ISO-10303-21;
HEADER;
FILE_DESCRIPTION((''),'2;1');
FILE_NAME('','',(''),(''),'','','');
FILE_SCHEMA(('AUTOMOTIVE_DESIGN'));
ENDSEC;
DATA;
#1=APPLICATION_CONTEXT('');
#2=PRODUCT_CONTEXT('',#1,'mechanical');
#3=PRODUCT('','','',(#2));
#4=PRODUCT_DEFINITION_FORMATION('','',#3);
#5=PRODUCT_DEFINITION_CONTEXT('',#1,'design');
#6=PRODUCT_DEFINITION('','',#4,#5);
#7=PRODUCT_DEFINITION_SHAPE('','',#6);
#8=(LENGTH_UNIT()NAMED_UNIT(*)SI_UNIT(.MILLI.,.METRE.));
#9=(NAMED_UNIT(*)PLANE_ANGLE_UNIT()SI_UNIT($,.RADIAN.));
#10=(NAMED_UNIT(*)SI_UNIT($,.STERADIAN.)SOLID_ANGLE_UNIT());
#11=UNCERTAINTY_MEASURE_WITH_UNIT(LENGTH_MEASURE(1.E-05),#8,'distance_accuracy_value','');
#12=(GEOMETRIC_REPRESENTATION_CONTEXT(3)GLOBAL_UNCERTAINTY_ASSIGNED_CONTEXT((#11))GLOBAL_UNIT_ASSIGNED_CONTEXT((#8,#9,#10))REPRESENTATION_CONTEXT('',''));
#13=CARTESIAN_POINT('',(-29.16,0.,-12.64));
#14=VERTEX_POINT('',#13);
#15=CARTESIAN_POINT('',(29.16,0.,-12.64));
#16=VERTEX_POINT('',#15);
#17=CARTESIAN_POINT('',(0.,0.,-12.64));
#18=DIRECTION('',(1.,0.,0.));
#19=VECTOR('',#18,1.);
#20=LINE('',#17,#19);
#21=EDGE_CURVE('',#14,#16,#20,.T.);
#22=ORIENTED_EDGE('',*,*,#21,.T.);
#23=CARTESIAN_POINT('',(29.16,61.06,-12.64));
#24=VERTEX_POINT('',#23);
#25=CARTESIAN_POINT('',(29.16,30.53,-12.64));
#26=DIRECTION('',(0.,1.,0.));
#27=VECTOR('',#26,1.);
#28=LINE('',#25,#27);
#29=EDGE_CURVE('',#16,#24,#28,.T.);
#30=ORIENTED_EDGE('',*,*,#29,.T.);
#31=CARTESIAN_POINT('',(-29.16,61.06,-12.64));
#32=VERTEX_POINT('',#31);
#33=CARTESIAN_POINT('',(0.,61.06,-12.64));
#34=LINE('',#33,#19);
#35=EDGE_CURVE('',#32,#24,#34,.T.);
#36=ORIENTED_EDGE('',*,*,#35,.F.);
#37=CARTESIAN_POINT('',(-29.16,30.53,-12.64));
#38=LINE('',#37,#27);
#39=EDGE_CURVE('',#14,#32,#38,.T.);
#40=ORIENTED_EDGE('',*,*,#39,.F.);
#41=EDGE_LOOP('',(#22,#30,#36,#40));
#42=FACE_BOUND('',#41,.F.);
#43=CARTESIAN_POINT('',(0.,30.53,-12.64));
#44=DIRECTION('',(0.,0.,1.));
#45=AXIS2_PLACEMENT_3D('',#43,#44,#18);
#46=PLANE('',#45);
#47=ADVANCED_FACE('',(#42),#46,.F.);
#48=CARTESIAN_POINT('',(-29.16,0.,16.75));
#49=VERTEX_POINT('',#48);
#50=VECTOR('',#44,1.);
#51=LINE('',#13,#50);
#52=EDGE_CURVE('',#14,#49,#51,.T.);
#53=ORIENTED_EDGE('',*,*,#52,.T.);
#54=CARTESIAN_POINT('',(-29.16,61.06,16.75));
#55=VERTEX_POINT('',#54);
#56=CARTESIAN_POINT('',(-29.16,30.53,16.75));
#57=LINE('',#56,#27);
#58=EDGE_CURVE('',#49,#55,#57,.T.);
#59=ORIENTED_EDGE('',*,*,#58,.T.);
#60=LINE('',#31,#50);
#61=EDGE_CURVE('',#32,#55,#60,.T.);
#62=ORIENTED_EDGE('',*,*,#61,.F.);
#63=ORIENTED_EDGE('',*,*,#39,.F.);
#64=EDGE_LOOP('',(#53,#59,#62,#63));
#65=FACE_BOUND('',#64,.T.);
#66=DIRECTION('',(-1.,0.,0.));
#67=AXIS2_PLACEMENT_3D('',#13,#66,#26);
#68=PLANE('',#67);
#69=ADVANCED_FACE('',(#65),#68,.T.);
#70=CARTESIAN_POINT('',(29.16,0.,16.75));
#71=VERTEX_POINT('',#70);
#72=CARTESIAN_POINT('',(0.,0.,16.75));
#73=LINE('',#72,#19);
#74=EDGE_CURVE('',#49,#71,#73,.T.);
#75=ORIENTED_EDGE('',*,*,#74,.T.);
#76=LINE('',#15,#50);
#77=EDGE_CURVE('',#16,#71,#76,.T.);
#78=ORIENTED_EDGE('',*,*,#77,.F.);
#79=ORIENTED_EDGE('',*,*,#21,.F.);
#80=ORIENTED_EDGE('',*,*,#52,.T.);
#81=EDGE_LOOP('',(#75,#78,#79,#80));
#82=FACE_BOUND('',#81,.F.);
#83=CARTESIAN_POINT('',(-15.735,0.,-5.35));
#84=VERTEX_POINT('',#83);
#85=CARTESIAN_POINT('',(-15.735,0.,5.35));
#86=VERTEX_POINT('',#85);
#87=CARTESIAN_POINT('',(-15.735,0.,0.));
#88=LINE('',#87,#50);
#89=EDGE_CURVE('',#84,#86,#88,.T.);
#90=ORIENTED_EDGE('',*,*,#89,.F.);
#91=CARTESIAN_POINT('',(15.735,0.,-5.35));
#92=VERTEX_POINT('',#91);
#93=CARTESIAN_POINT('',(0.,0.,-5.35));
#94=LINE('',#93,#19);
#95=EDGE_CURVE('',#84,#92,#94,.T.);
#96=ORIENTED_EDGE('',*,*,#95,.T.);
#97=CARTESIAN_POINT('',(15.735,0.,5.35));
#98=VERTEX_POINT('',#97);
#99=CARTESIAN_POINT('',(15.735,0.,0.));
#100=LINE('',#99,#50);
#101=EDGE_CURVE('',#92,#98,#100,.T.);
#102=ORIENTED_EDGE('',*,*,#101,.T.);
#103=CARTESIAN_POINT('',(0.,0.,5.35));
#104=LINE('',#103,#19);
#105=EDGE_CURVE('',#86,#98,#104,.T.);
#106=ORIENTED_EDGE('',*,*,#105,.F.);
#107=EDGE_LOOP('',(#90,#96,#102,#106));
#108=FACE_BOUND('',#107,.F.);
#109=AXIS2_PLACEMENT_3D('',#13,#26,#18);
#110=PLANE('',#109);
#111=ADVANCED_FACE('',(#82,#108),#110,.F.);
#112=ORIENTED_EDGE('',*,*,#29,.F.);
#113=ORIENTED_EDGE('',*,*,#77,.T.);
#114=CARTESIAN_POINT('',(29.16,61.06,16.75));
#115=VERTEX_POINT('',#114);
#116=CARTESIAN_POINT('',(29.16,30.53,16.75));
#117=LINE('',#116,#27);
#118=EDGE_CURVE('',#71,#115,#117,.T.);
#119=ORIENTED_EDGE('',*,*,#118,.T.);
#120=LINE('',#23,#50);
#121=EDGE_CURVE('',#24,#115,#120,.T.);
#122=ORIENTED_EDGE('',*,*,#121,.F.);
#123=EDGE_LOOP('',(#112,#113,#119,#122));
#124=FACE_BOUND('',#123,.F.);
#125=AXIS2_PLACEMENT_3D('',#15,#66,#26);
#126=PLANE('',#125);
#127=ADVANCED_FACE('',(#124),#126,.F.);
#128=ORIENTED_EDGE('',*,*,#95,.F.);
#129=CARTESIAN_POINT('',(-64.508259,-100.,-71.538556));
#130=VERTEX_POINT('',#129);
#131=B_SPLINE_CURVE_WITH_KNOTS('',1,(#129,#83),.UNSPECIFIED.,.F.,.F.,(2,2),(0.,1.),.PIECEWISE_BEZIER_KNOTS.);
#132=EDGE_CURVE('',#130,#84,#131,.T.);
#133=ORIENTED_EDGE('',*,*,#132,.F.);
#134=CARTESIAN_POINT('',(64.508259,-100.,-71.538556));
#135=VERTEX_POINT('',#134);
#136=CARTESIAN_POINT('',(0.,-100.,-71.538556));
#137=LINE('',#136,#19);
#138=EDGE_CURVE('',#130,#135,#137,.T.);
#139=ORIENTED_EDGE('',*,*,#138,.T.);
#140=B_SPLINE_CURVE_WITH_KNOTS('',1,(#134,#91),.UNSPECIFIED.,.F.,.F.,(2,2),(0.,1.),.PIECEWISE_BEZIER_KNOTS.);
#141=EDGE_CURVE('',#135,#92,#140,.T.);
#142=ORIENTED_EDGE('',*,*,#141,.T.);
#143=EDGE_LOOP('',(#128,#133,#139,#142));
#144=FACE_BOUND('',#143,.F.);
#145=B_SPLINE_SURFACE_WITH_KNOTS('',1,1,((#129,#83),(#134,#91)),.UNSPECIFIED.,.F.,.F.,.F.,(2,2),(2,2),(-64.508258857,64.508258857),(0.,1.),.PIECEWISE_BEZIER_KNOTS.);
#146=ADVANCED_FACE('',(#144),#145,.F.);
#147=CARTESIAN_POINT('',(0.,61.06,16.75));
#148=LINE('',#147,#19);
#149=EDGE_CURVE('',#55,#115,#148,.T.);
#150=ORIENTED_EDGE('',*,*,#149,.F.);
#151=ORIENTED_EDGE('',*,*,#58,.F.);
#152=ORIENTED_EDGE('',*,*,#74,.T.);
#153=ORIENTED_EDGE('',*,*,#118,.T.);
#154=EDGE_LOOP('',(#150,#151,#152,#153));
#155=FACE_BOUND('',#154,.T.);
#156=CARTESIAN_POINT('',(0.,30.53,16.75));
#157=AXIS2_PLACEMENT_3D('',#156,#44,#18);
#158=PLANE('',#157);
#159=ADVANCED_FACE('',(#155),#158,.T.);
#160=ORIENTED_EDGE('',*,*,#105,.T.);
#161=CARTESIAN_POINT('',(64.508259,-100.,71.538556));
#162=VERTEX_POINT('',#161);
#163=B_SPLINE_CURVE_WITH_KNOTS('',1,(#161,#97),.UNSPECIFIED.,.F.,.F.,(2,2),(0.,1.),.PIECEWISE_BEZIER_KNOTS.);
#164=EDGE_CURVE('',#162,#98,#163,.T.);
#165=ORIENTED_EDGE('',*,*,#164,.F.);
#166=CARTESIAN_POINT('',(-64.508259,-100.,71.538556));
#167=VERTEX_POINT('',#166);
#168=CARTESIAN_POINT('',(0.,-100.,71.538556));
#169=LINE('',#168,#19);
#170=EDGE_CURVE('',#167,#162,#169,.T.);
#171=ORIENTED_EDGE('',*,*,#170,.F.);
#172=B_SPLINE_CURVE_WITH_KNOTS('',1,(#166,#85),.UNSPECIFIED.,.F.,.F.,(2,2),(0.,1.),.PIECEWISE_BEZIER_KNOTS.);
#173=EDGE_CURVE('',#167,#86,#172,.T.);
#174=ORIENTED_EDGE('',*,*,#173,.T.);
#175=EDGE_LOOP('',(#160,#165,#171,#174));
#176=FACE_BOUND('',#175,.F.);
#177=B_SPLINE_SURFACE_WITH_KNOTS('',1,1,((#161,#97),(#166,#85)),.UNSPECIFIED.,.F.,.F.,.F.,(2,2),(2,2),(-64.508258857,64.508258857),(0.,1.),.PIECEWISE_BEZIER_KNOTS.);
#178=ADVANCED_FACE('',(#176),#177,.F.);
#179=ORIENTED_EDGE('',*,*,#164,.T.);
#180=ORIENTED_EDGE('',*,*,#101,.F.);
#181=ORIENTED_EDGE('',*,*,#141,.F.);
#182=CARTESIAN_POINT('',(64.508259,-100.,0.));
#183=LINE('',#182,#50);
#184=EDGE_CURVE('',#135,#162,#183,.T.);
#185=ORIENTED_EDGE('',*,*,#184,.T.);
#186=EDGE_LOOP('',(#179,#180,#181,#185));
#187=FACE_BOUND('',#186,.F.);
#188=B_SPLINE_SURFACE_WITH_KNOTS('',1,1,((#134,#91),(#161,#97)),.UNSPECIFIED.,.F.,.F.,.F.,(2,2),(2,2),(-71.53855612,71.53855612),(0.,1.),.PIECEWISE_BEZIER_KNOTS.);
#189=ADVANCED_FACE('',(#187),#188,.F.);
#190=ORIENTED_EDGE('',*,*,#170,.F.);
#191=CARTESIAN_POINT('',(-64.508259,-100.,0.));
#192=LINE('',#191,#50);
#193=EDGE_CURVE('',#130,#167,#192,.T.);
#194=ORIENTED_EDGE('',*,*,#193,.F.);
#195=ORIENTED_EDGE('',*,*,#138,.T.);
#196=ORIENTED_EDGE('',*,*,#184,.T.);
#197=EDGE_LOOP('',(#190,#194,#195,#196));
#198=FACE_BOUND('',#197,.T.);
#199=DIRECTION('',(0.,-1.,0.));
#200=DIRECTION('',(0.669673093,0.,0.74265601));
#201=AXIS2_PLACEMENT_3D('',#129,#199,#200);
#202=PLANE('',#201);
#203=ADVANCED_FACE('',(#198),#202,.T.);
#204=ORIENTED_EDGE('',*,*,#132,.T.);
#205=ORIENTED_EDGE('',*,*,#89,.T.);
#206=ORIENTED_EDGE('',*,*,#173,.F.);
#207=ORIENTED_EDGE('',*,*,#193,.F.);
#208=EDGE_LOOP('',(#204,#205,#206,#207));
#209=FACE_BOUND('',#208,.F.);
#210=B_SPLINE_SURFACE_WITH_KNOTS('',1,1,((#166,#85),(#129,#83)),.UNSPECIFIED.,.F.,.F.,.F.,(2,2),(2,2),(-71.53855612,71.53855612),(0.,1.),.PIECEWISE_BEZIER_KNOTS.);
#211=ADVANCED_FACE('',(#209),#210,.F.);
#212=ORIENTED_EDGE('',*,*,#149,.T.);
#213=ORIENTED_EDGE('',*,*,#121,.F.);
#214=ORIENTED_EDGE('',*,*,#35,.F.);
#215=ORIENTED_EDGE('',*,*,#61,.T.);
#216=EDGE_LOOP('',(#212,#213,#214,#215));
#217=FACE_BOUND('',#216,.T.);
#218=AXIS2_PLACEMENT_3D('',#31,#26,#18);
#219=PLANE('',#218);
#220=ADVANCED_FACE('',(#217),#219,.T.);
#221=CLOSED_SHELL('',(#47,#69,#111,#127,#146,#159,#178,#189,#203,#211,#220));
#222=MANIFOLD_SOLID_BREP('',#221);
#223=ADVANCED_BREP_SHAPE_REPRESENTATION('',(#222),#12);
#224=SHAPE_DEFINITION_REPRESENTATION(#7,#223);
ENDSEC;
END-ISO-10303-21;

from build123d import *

# Parameters (mm, degrees)
F1_W     = 58.32
F1_H     = 61.06
F1_R     = 1.5
F2_DEPTH = 29.39
F8_W     = 129.0165177132
F8_H     = 143.0771122391
F3_W     = 31.47
F3_H     = 10.7


with BuildPart() as f2:
    # F1 (on offset) → F2 (new body)
    with BuildSketch(Plane.XY.offset(-12.64)):
        with Locations((0, 30.53)):
            Rectangle(F1_W, F1_H)
        with Locations((15.73, 16.46)):
            Circle(F1_R, mode=Mode.SUBTRACT)
        with Locations((-15.77, 46.69)):
            Circle(F1_R, mode=Mode.SUBTRACT)
        with Locations((-15.77, 46.69)):
            Circle(F1_R)
        with Locations((15.73, 16.46)):
            Circle(F1_R)
    extrude(amount=F2_DEPTH)

    # F8 (on offset) → F9 section 0
    with BuildSketch(Plane.XZ.offset(100)):
        Rectangle(F8_W, F8_H)
    # F3 (on face) → F9 section 1
    with BuildSketch(Plane.XZ):
        Rectangle(F3_W, F3_H)
    loft()


solid = f2.part
